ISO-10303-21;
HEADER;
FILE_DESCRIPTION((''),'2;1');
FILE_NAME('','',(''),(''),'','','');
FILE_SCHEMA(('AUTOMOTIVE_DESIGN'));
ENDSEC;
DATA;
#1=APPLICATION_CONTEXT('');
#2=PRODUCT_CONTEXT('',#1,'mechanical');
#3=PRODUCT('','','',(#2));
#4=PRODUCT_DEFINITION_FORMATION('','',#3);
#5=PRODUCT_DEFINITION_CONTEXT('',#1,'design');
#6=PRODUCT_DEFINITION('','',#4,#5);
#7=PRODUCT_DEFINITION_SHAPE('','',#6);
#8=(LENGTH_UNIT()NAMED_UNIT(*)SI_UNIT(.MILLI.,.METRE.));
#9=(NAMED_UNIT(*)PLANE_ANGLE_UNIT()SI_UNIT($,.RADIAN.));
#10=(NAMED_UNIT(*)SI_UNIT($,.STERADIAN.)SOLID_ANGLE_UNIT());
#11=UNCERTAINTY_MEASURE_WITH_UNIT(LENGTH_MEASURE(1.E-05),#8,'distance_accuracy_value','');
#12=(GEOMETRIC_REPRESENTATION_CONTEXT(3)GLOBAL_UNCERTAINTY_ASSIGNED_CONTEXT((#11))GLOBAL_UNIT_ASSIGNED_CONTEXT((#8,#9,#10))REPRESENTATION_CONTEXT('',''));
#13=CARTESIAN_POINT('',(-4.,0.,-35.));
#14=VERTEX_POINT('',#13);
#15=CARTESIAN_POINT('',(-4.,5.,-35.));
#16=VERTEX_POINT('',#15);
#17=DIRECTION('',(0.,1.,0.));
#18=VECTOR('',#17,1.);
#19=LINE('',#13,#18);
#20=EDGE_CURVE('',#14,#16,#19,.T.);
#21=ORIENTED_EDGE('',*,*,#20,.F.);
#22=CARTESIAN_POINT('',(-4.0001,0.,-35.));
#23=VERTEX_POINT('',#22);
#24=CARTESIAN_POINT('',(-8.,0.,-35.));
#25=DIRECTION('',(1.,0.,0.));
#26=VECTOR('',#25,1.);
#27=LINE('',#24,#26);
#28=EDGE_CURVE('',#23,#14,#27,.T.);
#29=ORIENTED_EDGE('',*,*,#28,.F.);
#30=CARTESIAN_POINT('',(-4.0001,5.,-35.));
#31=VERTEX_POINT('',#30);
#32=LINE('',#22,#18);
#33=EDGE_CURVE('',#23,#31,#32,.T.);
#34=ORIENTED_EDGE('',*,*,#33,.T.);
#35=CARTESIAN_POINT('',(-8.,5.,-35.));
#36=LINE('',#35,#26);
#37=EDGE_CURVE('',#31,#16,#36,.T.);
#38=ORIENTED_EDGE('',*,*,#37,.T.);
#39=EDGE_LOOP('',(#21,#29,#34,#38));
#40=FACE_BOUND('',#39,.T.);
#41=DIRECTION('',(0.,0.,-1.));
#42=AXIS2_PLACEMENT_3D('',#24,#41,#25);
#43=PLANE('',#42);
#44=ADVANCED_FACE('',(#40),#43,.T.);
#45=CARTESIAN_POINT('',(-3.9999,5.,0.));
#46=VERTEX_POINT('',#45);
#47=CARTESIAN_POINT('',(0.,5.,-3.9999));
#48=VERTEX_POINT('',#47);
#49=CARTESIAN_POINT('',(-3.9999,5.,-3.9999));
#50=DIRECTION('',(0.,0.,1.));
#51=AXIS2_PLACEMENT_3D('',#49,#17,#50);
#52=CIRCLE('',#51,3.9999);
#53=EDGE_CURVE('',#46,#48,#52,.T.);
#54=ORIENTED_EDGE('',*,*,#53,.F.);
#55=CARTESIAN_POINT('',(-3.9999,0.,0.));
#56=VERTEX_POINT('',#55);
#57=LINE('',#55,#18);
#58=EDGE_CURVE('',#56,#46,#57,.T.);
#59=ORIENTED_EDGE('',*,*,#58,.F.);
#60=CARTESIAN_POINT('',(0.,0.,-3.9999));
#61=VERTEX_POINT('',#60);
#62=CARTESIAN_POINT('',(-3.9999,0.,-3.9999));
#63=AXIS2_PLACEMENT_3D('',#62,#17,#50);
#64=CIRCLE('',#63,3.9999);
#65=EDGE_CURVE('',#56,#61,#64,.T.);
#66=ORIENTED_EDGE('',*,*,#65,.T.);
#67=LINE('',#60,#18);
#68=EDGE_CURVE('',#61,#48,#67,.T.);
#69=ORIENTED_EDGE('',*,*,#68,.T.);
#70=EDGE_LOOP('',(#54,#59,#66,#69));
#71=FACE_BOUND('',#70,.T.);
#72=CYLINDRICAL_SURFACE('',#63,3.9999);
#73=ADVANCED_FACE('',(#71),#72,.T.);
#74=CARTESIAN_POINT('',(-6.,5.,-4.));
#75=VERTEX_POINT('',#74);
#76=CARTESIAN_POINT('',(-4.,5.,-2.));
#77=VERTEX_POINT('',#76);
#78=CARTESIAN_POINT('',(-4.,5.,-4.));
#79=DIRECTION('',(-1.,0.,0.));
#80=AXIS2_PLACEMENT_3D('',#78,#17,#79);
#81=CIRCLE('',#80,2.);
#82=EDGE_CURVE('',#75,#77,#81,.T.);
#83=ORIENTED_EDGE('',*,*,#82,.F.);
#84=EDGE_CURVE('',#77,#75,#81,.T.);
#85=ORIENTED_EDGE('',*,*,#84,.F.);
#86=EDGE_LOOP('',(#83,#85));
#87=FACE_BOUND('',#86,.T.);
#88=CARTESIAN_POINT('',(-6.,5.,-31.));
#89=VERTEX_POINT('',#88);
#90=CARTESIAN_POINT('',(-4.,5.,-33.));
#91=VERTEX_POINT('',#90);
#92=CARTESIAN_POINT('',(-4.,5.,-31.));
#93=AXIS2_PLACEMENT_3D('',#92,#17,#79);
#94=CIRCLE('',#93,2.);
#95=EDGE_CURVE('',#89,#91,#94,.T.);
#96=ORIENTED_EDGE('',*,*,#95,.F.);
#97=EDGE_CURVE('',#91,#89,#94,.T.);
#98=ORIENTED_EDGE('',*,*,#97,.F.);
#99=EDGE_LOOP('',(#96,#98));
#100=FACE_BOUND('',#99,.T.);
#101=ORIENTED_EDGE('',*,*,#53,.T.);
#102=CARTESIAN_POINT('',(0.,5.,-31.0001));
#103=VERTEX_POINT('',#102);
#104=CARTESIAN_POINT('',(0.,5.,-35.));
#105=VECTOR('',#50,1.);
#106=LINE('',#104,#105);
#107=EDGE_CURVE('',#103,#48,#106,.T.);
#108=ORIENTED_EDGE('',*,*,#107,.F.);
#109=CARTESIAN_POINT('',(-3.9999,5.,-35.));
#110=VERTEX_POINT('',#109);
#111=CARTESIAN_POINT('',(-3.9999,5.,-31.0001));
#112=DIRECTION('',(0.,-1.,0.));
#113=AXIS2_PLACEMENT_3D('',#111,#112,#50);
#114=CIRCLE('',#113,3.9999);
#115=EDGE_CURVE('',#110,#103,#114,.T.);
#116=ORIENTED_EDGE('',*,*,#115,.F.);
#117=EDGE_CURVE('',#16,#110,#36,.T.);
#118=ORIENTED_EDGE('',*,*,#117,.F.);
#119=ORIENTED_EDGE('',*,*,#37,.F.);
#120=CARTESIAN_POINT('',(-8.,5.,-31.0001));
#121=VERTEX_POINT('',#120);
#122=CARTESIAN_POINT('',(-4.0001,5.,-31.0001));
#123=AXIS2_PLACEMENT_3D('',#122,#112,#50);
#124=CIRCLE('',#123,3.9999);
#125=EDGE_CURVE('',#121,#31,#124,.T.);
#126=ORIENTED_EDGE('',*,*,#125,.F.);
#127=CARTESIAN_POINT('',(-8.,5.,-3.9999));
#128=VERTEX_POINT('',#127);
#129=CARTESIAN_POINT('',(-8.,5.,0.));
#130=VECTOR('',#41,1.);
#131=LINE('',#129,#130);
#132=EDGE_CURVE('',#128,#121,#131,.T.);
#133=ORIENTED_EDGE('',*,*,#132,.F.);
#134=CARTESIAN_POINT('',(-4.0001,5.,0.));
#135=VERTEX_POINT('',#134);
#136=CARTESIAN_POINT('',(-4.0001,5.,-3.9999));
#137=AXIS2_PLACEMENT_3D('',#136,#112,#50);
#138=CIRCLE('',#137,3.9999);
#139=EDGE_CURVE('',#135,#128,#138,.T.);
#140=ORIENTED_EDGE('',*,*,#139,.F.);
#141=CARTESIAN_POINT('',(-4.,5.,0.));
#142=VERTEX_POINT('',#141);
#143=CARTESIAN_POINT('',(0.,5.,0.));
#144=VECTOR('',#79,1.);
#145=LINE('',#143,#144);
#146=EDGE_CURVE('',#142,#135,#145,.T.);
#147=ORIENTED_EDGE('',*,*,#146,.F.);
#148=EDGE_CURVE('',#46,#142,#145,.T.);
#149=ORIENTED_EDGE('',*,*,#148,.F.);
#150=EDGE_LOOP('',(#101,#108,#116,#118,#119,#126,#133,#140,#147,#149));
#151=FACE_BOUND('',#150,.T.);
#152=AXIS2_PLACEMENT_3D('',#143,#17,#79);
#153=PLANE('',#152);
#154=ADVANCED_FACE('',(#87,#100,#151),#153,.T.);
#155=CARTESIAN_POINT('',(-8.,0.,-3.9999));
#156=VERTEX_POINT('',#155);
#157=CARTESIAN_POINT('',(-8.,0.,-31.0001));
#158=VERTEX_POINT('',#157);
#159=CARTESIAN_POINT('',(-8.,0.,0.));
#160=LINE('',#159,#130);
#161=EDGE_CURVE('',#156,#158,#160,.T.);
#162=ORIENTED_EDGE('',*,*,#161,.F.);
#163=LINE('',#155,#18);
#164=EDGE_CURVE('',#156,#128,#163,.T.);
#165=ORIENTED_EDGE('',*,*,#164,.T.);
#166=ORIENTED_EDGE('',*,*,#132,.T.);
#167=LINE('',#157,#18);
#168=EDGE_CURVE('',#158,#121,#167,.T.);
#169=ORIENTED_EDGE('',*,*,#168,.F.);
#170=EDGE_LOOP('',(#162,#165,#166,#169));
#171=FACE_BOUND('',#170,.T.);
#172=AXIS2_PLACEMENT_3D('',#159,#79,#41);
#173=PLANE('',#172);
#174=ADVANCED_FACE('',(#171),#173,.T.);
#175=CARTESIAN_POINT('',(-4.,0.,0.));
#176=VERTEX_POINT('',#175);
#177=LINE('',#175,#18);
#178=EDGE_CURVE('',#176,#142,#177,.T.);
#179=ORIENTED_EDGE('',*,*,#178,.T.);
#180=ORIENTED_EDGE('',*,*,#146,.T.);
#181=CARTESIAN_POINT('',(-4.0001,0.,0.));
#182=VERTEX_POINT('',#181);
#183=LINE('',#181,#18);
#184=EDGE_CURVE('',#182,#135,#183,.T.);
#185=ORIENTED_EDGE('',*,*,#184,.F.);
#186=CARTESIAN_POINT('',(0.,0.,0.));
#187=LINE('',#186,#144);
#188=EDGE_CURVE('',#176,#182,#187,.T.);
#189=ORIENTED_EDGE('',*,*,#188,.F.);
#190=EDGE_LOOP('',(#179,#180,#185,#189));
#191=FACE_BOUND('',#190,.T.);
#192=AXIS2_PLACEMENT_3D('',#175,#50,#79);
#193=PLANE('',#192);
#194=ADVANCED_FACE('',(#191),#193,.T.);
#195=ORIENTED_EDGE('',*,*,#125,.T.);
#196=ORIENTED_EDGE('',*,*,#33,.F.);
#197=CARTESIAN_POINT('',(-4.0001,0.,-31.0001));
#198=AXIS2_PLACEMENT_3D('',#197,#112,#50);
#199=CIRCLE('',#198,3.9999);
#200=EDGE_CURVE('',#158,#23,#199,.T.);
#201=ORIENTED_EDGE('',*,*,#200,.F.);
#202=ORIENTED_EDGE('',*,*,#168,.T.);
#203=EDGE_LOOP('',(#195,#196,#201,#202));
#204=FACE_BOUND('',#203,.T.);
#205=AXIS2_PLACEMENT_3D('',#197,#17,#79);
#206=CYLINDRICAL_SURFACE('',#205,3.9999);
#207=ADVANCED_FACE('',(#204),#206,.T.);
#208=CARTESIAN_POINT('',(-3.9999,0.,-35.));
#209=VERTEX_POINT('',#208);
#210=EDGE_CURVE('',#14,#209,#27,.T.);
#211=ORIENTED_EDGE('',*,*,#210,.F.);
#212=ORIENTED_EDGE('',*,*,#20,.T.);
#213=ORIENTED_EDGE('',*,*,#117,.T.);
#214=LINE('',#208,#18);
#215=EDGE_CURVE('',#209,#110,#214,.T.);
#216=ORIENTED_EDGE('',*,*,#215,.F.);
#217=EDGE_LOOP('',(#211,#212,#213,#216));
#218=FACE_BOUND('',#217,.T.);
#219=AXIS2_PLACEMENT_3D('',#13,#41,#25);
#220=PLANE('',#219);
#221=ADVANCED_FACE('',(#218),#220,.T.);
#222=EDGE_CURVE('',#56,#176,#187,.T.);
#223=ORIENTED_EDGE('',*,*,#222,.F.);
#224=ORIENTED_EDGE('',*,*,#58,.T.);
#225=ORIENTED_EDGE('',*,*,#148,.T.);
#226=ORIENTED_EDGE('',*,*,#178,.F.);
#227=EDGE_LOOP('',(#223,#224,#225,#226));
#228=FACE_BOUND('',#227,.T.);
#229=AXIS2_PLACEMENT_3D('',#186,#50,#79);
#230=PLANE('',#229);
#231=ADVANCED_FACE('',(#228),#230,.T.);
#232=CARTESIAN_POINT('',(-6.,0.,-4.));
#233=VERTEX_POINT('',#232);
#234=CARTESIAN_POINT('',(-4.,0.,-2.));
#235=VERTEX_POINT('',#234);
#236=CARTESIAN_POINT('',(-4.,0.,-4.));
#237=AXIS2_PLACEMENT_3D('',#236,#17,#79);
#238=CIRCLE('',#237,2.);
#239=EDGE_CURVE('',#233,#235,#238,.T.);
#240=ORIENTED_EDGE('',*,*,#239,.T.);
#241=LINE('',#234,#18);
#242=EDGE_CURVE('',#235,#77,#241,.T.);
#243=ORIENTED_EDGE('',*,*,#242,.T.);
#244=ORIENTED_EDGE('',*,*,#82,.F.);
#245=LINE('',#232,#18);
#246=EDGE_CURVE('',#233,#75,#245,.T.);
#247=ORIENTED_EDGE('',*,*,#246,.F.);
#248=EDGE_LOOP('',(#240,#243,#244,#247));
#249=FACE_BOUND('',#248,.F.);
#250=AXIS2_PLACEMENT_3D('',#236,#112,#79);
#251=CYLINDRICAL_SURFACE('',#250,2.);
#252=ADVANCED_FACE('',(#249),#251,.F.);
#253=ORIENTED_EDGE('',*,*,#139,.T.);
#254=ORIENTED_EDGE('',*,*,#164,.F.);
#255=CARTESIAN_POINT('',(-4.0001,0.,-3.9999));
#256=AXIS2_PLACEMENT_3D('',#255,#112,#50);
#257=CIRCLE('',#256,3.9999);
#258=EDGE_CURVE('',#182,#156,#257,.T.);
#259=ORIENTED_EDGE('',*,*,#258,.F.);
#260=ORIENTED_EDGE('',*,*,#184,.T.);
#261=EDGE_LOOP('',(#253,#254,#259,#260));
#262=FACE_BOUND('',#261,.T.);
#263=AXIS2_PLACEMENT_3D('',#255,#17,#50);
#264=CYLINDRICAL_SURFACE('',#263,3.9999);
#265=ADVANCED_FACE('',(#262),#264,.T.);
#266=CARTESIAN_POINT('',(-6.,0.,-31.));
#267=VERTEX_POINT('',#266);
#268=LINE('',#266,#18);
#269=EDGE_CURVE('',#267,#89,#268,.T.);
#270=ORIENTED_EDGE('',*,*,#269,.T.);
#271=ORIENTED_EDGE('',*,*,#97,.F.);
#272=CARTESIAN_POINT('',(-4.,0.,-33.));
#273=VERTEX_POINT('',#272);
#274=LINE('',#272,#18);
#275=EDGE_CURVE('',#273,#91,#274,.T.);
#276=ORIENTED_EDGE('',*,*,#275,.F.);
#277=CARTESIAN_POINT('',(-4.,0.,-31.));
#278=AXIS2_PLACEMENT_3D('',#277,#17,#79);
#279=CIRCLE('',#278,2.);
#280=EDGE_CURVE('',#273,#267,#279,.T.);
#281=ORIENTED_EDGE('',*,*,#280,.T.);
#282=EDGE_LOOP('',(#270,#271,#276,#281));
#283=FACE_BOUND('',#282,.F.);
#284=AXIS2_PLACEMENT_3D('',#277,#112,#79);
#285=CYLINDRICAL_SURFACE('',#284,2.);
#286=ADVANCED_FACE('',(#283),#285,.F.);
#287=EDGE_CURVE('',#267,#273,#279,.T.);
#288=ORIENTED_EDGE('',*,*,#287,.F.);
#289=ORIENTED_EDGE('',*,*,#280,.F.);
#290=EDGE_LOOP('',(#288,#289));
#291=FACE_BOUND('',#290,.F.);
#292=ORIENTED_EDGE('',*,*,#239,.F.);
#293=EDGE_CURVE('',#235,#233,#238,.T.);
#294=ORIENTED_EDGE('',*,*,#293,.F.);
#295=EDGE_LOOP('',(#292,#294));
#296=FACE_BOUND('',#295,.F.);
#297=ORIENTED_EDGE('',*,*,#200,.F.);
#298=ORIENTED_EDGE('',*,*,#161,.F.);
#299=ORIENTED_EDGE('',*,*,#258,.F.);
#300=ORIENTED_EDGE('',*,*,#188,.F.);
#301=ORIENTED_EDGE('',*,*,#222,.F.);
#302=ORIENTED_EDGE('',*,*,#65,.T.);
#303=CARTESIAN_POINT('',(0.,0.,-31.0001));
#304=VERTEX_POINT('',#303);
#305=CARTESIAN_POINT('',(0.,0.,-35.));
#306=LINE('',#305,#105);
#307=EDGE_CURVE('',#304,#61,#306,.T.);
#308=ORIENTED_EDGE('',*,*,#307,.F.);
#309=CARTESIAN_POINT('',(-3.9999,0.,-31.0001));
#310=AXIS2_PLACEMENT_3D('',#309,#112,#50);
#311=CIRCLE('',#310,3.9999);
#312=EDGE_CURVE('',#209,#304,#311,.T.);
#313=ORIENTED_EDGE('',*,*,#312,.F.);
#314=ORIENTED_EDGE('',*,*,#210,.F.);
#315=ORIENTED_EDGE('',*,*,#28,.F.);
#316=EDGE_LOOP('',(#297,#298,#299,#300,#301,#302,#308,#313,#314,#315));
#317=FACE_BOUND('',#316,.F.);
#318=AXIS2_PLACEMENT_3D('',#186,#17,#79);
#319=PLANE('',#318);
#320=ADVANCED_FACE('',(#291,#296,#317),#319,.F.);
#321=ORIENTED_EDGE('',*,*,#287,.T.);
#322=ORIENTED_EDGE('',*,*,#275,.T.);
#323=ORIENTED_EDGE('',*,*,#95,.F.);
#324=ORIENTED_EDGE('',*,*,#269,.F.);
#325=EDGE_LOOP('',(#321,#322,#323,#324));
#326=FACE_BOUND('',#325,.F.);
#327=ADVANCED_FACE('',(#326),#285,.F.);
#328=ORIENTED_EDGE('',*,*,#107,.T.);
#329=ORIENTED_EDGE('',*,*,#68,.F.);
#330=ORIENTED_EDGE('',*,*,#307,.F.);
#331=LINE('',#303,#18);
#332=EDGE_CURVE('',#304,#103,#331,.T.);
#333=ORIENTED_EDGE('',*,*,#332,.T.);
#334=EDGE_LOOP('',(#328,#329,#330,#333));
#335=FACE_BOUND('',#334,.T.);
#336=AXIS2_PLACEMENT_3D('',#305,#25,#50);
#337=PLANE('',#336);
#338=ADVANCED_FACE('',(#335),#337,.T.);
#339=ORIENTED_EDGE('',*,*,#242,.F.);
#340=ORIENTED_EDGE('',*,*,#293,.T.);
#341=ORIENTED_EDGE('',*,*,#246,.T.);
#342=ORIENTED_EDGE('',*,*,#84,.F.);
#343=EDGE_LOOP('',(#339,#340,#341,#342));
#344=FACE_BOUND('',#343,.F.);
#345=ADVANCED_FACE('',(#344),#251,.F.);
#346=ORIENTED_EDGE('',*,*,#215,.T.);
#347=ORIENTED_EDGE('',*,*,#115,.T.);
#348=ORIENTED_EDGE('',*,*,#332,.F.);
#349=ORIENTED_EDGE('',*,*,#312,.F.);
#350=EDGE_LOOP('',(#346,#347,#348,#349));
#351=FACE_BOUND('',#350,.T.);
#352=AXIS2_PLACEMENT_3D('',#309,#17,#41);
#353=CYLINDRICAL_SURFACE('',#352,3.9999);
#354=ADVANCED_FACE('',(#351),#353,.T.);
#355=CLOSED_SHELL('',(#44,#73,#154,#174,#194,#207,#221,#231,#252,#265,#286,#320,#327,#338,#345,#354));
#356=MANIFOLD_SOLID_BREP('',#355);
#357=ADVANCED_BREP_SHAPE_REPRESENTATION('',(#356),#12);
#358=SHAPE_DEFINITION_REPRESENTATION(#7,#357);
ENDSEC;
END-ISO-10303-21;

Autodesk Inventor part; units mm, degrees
ref_plane "YZ Plane" through (0, 0, 0) normal (1, 0, 0) x (0, 1, 0)
ref_plane "XZ Plane" through (0, 0, 0) normal (0, 1, 0) x (-1, 0, 0)
ref_plane "XY Plane" through (0, 0, 0) normal (0, 0, 1) x (1, 0, 0)
sketch "Sketch1" plane through (0, 0, 0) normal (0, 1, 0) x (-1, 0, 0)
  line L0 (0, 0) -> (8, 0)
  line L1 (8, 0) -> (8, -35)
  line L2 (8, -35) -> (0, -35)
  line L3 (0, -35) -> (0, 0)
  line L4 (8, 0) -> (4, 0)
  line L5 (4, 0) -> (4, -4)
  circle A0 centre (4, -4) radius 2
  line L6 (8, -35) -> (4, -35)
  line L7 (4, -35) -> (4, -31)
  circle A1 centre (4, -31) radius 2
  dimension "d0" = 8
  dimension "d1" = 35
  dimension "d2" = 4
  dimension "d3" = 4
  dimension "d4" = 4
  dimension "d5" = 4
  dimension "d6" = 4
  dimension "d7" = 4
extrude "Extrusion1" add sketch "Sketch1" along normal blind 5
fillet "Fillet1" radius 4 4 edges at (0, 2.5, 0) (-8, 2.5, 0) (-8, 2.5, -35) (0, 2.5, -35)
properties part number "Bar3"
